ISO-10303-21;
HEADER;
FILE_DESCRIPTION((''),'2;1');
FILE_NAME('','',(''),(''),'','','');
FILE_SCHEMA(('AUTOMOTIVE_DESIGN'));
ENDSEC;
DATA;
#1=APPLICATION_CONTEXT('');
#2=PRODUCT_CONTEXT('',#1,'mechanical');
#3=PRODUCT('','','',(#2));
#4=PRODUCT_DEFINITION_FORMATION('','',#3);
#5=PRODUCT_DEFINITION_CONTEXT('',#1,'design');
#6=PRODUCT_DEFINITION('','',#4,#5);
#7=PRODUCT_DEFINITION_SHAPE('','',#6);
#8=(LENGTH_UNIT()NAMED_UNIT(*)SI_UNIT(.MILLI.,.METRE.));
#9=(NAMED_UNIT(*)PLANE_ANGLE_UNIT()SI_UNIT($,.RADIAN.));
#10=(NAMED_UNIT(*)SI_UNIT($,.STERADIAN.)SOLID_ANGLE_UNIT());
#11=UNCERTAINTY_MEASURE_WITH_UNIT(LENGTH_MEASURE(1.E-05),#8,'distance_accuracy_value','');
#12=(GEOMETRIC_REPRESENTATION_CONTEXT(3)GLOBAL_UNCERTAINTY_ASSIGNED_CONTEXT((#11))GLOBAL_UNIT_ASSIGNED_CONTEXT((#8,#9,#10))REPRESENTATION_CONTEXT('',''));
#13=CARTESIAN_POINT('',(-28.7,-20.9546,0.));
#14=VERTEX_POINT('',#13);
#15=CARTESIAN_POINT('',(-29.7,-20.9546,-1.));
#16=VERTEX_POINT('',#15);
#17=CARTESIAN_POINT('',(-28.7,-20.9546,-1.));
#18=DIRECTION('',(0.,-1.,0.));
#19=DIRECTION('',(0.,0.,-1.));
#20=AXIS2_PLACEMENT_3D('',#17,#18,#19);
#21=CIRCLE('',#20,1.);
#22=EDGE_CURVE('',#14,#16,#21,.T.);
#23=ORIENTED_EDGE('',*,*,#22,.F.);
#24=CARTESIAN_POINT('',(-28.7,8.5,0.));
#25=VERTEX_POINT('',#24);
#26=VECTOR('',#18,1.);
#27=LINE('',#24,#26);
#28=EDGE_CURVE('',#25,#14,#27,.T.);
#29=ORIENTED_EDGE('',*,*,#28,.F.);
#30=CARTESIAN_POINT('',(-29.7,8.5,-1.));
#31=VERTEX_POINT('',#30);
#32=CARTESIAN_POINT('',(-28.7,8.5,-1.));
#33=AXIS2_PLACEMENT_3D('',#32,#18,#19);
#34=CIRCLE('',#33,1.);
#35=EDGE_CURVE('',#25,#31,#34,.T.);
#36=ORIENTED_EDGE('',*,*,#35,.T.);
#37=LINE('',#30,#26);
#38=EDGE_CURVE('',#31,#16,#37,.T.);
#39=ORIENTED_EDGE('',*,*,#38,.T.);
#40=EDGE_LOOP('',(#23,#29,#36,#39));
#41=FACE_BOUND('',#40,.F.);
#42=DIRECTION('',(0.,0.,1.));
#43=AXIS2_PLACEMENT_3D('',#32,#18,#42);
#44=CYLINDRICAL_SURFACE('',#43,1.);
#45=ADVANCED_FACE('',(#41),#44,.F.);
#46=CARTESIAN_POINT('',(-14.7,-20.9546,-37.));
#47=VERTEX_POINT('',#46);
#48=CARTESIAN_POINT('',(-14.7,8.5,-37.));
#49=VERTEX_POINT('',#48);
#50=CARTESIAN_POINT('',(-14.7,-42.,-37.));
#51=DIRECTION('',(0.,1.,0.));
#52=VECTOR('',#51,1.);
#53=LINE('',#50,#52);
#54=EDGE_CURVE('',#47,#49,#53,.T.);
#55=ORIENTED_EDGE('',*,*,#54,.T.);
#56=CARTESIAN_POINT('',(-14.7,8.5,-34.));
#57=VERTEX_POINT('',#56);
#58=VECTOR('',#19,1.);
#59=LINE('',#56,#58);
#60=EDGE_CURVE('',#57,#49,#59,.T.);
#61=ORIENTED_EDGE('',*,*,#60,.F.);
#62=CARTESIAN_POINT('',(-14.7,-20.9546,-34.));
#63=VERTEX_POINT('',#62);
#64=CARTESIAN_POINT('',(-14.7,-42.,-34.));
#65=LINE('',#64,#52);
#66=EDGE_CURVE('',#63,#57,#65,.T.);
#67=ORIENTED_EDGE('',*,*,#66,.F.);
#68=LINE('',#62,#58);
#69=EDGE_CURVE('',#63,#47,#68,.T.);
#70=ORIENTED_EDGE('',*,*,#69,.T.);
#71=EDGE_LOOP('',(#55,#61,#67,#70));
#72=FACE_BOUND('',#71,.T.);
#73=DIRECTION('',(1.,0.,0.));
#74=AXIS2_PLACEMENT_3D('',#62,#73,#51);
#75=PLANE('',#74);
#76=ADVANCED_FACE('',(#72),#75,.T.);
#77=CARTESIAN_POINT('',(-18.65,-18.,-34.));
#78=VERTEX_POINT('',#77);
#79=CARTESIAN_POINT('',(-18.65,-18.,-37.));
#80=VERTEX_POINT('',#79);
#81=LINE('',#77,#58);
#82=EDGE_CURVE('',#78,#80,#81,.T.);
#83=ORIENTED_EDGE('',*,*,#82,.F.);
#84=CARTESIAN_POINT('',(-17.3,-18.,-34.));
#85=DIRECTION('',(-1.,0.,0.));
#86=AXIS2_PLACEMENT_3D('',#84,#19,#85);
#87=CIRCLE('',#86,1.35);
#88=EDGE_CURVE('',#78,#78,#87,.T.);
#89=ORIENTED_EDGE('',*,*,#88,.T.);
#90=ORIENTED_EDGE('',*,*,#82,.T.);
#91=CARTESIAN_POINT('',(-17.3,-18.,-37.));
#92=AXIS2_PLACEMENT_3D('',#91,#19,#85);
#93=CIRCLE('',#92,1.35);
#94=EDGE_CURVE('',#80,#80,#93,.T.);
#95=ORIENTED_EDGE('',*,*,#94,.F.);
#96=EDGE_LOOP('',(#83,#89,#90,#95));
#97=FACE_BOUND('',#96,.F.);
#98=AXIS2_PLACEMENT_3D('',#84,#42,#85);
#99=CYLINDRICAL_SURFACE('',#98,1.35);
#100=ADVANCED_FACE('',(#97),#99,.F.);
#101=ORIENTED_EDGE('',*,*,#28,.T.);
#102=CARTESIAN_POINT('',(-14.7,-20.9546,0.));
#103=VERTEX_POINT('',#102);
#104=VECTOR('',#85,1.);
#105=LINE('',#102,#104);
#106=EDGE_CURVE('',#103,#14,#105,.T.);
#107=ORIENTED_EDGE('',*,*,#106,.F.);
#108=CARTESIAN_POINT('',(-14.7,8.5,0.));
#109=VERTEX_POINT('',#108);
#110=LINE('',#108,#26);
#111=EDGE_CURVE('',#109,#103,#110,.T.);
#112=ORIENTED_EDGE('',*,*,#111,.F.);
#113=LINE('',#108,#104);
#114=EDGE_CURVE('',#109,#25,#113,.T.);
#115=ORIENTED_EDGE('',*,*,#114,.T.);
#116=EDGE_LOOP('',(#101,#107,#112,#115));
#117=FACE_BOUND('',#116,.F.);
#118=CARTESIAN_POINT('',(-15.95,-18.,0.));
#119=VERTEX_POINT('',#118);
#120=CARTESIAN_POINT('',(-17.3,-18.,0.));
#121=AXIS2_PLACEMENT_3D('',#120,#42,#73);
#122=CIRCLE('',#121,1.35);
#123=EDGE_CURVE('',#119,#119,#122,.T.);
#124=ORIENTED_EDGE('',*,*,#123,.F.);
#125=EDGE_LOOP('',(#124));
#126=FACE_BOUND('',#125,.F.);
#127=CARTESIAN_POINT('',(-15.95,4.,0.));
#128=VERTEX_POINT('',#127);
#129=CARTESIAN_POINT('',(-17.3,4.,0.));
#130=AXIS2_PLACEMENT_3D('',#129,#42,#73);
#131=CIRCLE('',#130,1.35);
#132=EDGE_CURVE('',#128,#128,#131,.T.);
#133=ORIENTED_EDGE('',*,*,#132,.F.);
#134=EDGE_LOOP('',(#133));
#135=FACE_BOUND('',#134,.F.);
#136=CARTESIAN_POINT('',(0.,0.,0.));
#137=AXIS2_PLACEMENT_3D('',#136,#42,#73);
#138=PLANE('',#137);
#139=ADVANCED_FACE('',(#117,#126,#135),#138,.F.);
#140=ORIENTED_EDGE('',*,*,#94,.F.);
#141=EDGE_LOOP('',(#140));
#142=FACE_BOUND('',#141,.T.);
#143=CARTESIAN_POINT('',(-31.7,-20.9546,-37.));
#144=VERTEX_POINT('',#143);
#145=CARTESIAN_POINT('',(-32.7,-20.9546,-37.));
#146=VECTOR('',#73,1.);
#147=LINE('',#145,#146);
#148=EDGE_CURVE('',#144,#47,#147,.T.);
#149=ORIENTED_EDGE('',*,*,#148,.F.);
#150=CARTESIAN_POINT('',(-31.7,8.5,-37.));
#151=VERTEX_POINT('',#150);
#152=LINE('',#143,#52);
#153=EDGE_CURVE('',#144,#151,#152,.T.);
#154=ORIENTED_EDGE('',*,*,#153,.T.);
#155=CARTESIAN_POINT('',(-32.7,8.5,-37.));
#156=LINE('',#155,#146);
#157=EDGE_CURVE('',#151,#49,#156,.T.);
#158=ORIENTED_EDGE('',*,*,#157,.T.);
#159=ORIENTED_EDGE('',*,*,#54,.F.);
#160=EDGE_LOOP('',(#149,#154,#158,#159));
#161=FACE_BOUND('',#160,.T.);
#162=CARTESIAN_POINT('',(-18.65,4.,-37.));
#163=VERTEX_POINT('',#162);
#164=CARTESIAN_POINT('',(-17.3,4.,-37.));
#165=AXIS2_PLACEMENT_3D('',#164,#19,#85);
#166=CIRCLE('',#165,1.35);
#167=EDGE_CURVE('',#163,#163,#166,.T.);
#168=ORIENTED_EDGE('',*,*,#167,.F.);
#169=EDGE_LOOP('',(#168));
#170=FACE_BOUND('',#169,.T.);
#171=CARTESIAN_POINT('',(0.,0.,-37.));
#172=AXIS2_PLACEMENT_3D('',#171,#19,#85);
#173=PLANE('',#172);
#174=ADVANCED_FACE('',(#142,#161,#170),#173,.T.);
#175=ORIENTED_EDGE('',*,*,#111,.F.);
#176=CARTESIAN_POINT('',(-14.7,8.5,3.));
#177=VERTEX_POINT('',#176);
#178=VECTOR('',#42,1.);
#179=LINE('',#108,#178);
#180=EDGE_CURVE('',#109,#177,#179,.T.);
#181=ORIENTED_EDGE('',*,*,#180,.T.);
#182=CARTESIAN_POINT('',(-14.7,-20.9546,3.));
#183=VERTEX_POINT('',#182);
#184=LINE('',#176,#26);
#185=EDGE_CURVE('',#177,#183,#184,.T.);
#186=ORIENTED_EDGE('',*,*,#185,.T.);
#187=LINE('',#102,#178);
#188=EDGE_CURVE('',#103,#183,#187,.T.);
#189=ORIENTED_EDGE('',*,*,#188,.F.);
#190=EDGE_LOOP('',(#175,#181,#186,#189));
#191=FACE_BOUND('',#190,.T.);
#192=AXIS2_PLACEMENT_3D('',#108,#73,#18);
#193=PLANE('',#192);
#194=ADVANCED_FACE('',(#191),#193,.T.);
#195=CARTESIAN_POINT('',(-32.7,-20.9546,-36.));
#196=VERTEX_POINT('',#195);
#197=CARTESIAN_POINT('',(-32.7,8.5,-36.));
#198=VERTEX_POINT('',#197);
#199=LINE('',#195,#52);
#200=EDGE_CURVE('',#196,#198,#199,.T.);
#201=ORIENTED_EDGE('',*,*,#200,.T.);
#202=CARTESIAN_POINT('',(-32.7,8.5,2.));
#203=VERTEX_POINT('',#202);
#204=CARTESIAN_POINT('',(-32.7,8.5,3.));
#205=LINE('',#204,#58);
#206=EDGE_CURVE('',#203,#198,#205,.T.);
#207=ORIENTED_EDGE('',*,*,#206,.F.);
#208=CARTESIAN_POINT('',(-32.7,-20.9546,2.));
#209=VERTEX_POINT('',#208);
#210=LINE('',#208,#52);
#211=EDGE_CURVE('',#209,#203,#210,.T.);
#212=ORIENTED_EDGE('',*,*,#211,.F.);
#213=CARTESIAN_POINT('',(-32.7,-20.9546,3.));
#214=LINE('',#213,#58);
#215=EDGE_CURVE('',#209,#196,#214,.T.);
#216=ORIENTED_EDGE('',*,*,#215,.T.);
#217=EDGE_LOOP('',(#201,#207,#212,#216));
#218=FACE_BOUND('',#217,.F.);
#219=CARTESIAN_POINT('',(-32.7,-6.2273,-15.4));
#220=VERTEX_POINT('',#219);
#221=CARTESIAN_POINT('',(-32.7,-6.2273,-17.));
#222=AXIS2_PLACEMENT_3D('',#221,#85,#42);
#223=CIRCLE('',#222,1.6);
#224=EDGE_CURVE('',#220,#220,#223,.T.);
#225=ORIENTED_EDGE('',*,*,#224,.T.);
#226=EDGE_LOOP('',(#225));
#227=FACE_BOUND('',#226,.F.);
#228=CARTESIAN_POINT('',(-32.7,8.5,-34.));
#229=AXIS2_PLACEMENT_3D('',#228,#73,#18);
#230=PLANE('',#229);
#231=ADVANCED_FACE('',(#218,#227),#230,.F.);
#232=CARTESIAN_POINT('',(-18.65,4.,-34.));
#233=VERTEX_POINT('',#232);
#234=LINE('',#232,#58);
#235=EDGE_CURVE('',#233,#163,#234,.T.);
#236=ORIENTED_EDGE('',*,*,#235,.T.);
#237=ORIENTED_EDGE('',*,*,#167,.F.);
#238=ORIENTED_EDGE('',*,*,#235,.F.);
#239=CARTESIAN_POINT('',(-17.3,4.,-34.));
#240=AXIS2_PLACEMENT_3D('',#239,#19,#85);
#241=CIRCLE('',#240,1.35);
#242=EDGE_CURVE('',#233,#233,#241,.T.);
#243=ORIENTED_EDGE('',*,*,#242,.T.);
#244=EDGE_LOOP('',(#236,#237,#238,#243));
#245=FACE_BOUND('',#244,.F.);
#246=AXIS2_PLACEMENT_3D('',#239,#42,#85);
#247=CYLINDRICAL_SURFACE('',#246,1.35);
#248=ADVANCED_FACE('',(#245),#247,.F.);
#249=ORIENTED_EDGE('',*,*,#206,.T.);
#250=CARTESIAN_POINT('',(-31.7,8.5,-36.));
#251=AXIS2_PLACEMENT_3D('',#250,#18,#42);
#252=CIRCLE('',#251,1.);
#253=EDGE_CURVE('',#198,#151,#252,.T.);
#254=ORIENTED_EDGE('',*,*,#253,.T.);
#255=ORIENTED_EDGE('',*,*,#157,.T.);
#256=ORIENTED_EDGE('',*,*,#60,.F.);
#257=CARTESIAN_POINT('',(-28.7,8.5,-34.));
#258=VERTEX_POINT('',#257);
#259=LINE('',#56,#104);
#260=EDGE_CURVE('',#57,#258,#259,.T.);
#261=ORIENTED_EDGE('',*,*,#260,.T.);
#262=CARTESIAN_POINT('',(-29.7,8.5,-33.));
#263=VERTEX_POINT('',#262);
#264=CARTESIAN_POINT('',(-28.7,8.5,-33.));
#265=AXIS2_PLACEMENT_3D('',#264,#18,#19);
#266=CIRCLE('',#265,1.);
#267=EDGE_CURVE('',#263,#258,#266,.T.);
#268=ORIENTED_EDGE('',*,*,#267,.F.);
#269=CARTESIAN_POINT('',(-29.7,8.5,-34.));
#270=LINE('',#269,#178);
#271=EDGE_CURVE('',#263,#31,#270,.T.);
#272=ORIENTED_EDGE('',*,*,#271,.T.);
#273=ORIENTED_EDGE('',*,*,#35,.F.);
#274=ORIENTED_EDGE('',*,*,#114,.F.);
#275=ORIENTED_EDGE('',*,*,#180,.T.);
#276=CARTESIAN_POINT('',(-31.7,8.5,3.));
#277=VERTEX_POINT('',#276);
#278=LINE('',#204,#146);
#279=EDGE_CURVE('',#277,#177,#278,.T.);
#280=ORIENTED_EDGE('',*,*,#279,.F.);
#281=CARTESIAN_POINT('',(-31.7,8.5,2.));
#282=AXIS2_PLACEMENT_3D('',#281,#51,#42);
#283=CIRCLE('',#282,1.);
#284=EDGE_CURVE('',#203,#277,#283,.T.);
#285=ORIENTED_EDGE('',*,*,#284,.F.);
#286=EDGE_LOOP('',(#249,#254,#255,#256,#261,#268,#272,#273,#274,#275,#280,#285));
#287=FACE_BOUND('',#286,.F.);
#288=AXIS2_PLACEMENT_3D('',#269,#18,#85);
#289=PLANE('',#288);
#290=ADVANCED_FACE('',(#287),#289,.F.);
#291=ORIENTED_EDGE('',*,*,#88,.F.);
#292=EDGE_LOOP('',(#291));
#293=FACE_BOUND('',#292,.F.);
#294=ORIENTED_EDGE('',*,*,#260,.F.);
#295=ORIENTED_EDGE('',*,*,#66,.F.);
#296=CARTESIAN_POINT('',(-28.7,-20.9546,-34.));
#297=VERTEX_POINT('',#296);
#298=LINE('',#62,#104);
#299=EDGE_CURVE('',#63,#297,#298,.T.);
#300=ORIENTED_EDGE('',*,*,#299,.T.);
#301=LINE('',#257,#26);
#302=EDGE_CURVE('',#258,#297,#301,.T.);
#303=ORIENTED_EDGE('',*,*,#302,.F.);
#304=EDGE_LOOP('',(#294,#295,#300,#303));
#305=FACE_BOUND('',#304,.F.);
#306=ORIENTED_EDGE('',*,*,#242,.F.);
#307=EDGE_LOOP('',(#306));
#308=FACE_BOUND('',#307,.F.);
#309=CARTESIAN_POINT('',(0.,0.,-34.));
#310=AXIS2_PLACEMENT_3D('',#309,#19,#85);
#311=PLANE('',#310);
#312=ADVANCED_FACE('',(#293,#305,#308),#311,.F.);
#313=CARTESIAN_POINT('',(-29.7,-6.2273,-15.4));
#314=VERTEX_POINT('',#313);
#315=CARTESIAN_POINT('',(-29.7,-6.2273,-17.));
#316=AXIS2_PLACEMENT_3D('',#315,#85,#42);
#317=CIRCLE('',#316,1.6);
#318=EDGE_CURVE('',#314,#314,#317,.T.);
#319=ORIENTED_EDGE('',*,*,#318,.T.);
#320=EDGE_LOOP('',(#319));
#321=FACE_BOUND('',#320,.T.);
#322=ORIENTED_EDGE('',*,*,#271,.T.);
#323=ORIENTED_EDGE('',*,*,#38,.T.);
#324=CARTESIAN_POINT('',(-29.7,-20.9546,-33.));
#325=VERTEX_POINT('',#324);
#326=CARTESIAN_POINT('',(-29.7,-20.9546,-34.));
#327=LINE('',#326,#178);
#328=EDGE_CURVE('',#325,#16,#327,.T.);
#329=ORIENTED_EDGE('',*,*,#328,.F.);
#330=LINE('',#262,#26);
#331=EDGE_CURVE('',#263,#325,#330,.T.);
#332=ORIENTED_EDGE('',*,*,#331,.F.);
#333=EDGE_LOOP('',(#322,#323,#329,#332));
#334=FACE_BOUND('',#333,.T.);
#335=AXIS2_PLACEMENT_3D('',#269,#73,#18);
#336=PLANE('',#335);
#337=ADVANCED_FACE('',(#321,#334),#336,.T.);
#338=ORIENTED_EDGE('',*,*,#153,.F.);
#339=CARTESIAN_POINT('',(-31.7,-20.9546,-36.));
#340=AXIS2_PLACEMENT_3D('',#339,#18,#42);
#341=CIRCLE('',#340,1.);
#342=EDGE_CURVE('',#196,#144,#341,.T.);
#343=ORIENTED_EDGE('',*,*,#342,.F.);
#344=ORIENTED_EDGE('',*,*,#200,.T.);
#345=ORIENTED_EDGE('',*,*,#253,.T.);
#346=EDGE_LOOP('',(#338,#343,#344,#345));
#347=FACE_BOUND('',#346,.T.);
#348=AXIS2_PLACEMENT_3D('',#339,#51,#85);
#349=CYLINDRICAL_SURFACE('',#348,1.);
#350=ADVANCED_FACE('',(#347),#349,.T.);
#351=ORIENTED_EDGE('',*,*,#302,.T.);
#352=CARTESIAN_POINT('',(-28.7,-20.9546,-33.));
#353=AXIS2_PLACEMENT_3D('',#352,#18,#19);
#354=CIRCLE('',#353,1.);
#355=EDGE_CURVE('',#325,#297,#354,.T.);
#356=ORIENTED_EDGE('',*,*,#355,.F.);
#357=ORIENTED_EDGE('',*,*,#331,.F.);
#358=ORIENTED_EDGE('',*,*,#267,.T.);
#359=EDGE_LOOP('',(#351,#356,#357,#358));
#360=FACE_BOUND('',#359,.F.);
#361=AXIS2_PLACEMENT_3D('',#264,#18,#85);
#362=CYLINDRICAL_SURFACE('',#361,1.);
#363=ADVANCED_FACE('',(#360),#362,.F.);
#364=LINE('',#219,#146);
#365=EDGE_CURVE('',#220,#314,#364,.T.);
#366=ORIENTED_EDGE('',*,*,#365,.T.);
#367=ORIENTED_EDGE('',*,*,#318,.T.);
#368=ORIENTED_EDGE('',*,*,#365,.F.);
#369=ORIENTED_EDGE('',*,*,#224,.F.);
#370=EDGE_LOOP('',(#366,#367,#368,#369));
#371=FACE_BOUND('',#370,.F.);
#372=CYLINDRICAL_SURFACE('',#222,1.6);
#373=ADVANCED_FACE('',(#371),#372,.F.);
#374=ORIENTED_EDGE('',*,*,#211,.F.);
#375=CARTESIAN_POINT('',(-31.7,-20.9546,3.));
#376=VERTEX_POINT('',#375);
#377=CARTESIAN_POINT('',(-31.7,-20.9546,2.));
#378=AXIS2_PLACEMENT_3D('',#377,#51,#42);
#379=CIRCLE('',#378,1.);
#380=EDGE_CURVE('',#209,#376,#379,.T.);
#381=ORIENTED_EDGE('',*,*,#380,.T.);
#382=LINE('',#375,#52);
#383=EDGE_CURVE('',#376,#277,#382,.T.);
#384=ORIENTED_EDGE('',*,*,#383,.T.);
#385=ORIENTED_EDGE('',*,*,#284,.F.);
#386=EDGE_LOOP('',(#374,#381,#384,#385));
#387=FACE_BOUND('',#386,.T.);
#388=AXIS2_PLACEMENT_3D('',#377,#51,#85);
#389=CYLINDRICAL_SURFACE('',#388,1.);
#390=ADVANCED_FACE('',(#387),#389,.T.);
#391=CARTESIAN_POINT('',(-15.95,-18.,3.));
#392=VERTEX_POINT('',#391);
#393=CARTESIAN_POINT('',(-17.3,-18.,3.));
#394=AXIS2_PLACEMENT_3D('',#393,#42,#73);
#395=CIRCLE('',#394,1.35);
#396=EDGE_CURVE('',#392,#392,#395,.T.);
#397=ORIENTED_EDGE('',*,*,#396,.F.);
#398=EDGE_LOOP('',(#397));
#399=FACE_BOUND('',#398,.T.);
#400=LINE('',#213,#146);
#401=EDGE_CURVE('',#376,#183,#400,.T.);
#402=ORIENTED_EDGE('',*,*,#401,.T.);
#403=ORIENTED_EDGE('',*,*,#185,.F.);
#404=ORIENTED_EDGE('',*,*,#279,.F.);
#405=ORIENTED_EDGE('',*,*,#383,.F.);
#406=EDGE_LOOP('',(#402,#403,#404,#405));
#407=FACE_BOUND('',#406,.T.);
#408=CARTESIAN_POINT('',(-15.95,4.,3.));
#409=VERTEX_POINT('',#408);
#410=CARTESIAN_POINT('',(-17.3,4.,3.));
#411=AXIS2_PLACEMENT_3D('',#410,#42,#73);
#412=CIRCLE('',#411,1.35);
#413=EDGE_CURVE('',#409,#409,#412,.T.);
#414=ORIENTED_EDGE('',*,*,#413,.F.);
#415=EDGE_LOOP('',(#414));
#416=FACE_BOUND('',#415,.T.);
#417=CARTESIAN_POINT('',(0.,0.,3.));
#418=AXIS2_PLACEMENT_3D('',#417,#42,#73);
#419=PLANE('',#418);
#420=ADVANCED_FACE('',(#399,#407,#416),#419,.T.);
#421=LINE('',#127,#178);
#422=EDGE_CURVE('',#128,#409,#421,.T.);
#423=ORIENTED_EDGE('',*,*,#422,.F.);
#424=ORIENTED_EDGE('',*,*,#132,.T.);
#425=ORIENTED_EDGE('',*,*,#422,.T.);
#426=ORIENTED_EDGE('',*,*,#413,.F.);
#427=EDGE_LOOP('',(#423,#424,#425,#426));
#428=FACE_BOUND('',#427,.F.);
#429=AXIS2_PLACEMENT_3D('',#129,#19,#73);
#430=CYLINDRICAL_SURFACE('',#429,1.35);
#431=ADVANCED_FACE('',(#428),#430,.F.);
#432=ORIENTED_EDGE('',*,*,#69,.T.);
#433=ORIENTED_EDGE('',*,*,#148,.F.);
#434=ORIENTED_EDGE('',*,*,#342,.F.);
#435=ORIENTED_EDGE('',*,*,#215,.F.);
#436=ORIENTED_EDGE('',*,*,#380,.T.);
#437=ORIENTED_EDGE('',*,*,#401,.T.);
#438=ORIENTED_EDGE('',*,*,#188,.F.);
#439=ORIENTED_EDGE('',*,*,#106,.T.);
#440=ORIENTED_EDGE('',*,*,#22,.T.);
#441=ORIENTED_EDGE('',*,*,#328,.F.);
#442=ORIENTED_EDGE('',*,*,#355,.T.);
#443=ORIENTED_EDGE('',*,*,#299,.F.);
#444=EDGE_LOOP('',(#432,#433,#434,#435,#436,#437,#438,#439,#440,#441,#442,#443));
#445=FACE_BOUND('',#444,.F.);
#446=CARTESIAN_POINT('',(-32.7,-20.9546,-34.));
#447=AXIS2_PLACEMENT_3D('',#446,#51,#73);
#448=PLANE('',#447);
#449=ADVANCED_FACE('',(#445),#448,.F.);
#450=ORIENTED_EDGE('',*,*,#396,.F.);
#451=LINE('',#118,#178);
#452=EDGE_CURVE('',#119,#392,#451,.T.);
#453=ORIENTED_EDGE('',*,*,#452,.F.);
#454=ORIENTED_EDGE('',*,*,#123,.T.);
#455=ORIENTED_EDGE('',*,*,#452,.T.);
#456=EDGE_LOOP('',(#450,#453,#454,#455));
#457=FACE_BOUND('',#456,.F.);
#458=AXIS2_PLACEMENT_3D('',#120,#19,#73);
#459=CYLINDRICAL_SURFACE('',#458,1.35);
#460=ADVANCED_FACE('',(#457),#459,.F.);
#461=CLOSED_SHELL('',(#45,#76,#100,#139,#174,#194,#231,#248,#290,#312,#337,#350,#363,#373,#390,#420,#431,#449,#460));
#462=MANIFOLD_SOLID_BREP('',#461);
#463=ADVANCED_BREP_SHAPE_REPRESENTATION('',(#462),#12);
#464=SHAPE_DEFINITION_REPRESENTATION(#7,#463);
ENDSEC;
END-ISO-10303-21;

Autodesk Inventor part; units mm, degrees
ref_plane "YZ Plane" through (0, 0, 0) normal (1, 0, 0) x (0, 1, 0)
ref_plane "XZ Plane" through (0, 0, 0) normal (0, 1, 0) x (-1, 0, 0)
ref_plane "XY Plane" through (0, 0, 0) normal (0, 0, 1) x (1, 0, 0)
ref_plane "작업 평면1" through (0, 0, -34) normal (0, 0, -1) x (-1, 0, 0)
sketch "스케치1" plane through (0, 0, -34) normal (0, 0, -1) x (-1, 0, 0)
  circle A0 centre (17.3, -18) radius 1.35 projected
  line L0 (20.1, -44.6) -> (20.1, 8.5) projected
  line L1 (14.5, -42) -> (14.5, 11.5) projected
  circle A1 centre (17.3, 4) radius 1.35 projected
  circle A2 centre (17.3, -18) radius 1.45
  circle A3 centre (17.3, 4) radius 1.45
  line L2 (14.7, -42) -> (14.7, 11.5)
  line L3 (14.7, 11.5) -> (20.1, 8.5)
  line L4 (14.7, -20.9546) -> (32.7, -20.9546)
  line L5 (32.7, -20.9546) -> (32.7, 8.5)
  line L6 (32.7, 8.5) -> (20.1, 8.5)
  line L7 (32.7, -20.9546) -> (26.7, -20.9546)
  line L8 (26.7, -20.9546) -> (26.7, 8.5)
  line L9 (26.7, 8.5) -> (32.7, 8.5)
  line L10 (32.7, 8.5) -> (32.7, -20.9546)
  line L11 (20.1, 8.5) -> (14.7, 8.5)
  point P0 (0, 0)
  dimension "d0" = 0.1
  dimension "d1" = 0.1
  dimension "d2" = 0.2
  dimension "d3" = 18
  dimension "d8" = 6
extrude "돌출1" add sketch "스케치1" along normal blind 3 contours L4 L2 L11 L0 | L0 L6 L8 L4 | L8 L6 L5 L4 | A2 | A3
sketch "스케치2" plane through (0, 0, -34) normal (0, 0, 1) x (1, 0, 0)
  line L0 (-20.1, 8.5) -> (-14.7, 11.5) projected
  line L1 (-14.7, 8.5) -> (-14.7, -20.9546) projected
  line L2 (-20.1, -44.6) -> (-20.1, 8.5) projected
  line L3 (-32.7, 8.5) -> (-14.7, 8.5) projected
  line L4 (-32.7, -20.9546) -> (-32.7, 8.5) projected
  line L5 (-14.7, -20.9546) -> (-32.7, -20.9546) projected
  line L6 (-20.1, -20.9546) -> (-32.7, -20.9546)
  line L7 (-32.7, -20.9546) -> (-32.7, 8.5)
  line L8 (-32.7, 8.5) -> (-20.1, 8.5)
  line L9 (-20.1, 8.5) -> (-20.1, -20.9546)
  line L10 (-20.1, -20.9546) -> (-14.7, -20.9546)
  line L11 (-14.7, 11.5) -> (-20.1, 8.5)
  circle A0 centre (-17.3, -18) radius 1.45 projected
  circle A1 centre (-17.3, 4) radius 1.35 projected
  circle A2 centre (-17.3, 4) radius 1.45 projected
  circle A3 centre (-17.3, 4) radius 1.45
  circle A4 centre (-17.3, -18) radius 1.45
  point P0 (0, 0)
ref_plane "작업 평면2" through (0, 0, 0) normal (0, 0, 1) x (1, 0, 0)
sketch "스케치3" plane through (0, 0, 0) normal (0, 0, 1) x (1, 0, 0)
  line L0 (-32.7, 8.5) -> (-14.7, 8.5) projected
  line L1 (-32.7, -20.9546) -> (-32.7, 8.5) projected
  line L2 (-14.7, -20.9546) -> (-32.7, -20.9546) projected
  line L3 (-14.7, 8.5) -> (-14.7, -20.9546) projected
  line L4 (-20.1, -20.9546) -> (-32.7, -20.9546)
  line L5 (-32.7, -20.9546) -> (-32.7, 8.5)
  line L6 (-32.7, 8.5) -> (-20.1, 8.5)
  line L7 (-20.1, 8.5) -> (-20.1, -20.9546)
  line L8 (-32.7, -20.9546) -> (-20.1, -20.9546)
  line L9 (-20.1, -20.9546) -> (-20.1, 8.5)
  line L10 (-20.1, 8.5) -> (-32.7, 8.5)
  line L11 (-32.7, 8.5) -> (-32.7, -20.9546)
  line L12 (-20.1, -20.9546) -> (-14.7, -20.9546)
  line L13 (-14.7, 8.5) -> (-14.7, -20.9546) projected
  line L14 (-14.7, 11.5) -> (-20.1, 8.5)
  circle A0 centre (-17.3, -18) radius 1.45
  circle A1 centre (-17.3, 4) radius 1.45
  circle A2 centre (-17.3, 4) radius 1.35 projected
  circle A3 centre (-17.3, 4) radius 1.35
  circle A4 centre (-17.3, -18) radius 1.35
  point P0 (0, 0)
  dimension "d25" = 2.7
  dimension "d26" = 2.7
extrude "돌출2" add sketch "스케치3" along normal blind 3 contours L0 L7 L2 L1 | L0 L3 L2 L7 | A0 | A1
sketch "스케치4" plane through (0, 0, -34) normal (0, 0, 1) x (1, 0, 0)
  line L0 (-14.7, -20.9546) -> (-14.7, 8.5) projected
  line L1 (-14.7, 8.5) -> (-32.7, 8.5) projected
  line L2 (-32.7, 8.5) -> (-32.7, -20.9546) projected
  line L3 (-32.7, -20.9546) -> (-14.7, -20.9546) projected
  line L4 (-32.7, 8.5) -> (-26.7, 8.5)
  line L5 (-26.7, -20.9546) -> (-32.7, -20.9546)
  line L6 (-32.7, -20.9546) -> (-32.7, 8.5)
  line L7 (-32.7, 8.5) -> (-29.7, 8.5)
  line L8 (-29.7, 8.5) -> (-29.7, -20.9546)
  line L9 (-29.7, -20.9546) -> (-32.7, -20.9546)
  line L10 (-32.7, -20.9546) -> (-32.7, 8.5)
  point P0 (0, 0)
  point P1 (-29.7, -20.9546)
  dimension "d9" = 6
  dimension "d23" = 3
extrude "돌출3" add sketch "스케치4" along normal up to surface (34 mm away) contours L3 L2 L1 L8
sketch "스케치6" plane through (-32.7, -20.9546, -37) normal (-1, 0, 0) x (0, 0, 1)
  line L0 (40, 29.4546) -> (0, 29.4546) projected
  line L1 (0, 0) -> (0, 29.4546) projected
  line L2 (0, 0) -> (40, 0) projected
  line L3 (40, 29.4546) -> (40, 0) projected
  circle A0 centre (20, 14.7273) radius 1.6
  point P0 (37, 20.9546)
  dimension "d24" = 3.2
extrude "돌출5" cut sketch "스케치6" against normal blind 10 contours A0
fillet "모깎기1" radius 1 4 edges at (-32.7, -6.2273, 3) (-32.7, -6.2273, -37) (-29.7, -6.2273, -34) (-29.7, -6.2273, 0)
properties part number "3D_pelvis1" material "PMMA 플라스틱"
